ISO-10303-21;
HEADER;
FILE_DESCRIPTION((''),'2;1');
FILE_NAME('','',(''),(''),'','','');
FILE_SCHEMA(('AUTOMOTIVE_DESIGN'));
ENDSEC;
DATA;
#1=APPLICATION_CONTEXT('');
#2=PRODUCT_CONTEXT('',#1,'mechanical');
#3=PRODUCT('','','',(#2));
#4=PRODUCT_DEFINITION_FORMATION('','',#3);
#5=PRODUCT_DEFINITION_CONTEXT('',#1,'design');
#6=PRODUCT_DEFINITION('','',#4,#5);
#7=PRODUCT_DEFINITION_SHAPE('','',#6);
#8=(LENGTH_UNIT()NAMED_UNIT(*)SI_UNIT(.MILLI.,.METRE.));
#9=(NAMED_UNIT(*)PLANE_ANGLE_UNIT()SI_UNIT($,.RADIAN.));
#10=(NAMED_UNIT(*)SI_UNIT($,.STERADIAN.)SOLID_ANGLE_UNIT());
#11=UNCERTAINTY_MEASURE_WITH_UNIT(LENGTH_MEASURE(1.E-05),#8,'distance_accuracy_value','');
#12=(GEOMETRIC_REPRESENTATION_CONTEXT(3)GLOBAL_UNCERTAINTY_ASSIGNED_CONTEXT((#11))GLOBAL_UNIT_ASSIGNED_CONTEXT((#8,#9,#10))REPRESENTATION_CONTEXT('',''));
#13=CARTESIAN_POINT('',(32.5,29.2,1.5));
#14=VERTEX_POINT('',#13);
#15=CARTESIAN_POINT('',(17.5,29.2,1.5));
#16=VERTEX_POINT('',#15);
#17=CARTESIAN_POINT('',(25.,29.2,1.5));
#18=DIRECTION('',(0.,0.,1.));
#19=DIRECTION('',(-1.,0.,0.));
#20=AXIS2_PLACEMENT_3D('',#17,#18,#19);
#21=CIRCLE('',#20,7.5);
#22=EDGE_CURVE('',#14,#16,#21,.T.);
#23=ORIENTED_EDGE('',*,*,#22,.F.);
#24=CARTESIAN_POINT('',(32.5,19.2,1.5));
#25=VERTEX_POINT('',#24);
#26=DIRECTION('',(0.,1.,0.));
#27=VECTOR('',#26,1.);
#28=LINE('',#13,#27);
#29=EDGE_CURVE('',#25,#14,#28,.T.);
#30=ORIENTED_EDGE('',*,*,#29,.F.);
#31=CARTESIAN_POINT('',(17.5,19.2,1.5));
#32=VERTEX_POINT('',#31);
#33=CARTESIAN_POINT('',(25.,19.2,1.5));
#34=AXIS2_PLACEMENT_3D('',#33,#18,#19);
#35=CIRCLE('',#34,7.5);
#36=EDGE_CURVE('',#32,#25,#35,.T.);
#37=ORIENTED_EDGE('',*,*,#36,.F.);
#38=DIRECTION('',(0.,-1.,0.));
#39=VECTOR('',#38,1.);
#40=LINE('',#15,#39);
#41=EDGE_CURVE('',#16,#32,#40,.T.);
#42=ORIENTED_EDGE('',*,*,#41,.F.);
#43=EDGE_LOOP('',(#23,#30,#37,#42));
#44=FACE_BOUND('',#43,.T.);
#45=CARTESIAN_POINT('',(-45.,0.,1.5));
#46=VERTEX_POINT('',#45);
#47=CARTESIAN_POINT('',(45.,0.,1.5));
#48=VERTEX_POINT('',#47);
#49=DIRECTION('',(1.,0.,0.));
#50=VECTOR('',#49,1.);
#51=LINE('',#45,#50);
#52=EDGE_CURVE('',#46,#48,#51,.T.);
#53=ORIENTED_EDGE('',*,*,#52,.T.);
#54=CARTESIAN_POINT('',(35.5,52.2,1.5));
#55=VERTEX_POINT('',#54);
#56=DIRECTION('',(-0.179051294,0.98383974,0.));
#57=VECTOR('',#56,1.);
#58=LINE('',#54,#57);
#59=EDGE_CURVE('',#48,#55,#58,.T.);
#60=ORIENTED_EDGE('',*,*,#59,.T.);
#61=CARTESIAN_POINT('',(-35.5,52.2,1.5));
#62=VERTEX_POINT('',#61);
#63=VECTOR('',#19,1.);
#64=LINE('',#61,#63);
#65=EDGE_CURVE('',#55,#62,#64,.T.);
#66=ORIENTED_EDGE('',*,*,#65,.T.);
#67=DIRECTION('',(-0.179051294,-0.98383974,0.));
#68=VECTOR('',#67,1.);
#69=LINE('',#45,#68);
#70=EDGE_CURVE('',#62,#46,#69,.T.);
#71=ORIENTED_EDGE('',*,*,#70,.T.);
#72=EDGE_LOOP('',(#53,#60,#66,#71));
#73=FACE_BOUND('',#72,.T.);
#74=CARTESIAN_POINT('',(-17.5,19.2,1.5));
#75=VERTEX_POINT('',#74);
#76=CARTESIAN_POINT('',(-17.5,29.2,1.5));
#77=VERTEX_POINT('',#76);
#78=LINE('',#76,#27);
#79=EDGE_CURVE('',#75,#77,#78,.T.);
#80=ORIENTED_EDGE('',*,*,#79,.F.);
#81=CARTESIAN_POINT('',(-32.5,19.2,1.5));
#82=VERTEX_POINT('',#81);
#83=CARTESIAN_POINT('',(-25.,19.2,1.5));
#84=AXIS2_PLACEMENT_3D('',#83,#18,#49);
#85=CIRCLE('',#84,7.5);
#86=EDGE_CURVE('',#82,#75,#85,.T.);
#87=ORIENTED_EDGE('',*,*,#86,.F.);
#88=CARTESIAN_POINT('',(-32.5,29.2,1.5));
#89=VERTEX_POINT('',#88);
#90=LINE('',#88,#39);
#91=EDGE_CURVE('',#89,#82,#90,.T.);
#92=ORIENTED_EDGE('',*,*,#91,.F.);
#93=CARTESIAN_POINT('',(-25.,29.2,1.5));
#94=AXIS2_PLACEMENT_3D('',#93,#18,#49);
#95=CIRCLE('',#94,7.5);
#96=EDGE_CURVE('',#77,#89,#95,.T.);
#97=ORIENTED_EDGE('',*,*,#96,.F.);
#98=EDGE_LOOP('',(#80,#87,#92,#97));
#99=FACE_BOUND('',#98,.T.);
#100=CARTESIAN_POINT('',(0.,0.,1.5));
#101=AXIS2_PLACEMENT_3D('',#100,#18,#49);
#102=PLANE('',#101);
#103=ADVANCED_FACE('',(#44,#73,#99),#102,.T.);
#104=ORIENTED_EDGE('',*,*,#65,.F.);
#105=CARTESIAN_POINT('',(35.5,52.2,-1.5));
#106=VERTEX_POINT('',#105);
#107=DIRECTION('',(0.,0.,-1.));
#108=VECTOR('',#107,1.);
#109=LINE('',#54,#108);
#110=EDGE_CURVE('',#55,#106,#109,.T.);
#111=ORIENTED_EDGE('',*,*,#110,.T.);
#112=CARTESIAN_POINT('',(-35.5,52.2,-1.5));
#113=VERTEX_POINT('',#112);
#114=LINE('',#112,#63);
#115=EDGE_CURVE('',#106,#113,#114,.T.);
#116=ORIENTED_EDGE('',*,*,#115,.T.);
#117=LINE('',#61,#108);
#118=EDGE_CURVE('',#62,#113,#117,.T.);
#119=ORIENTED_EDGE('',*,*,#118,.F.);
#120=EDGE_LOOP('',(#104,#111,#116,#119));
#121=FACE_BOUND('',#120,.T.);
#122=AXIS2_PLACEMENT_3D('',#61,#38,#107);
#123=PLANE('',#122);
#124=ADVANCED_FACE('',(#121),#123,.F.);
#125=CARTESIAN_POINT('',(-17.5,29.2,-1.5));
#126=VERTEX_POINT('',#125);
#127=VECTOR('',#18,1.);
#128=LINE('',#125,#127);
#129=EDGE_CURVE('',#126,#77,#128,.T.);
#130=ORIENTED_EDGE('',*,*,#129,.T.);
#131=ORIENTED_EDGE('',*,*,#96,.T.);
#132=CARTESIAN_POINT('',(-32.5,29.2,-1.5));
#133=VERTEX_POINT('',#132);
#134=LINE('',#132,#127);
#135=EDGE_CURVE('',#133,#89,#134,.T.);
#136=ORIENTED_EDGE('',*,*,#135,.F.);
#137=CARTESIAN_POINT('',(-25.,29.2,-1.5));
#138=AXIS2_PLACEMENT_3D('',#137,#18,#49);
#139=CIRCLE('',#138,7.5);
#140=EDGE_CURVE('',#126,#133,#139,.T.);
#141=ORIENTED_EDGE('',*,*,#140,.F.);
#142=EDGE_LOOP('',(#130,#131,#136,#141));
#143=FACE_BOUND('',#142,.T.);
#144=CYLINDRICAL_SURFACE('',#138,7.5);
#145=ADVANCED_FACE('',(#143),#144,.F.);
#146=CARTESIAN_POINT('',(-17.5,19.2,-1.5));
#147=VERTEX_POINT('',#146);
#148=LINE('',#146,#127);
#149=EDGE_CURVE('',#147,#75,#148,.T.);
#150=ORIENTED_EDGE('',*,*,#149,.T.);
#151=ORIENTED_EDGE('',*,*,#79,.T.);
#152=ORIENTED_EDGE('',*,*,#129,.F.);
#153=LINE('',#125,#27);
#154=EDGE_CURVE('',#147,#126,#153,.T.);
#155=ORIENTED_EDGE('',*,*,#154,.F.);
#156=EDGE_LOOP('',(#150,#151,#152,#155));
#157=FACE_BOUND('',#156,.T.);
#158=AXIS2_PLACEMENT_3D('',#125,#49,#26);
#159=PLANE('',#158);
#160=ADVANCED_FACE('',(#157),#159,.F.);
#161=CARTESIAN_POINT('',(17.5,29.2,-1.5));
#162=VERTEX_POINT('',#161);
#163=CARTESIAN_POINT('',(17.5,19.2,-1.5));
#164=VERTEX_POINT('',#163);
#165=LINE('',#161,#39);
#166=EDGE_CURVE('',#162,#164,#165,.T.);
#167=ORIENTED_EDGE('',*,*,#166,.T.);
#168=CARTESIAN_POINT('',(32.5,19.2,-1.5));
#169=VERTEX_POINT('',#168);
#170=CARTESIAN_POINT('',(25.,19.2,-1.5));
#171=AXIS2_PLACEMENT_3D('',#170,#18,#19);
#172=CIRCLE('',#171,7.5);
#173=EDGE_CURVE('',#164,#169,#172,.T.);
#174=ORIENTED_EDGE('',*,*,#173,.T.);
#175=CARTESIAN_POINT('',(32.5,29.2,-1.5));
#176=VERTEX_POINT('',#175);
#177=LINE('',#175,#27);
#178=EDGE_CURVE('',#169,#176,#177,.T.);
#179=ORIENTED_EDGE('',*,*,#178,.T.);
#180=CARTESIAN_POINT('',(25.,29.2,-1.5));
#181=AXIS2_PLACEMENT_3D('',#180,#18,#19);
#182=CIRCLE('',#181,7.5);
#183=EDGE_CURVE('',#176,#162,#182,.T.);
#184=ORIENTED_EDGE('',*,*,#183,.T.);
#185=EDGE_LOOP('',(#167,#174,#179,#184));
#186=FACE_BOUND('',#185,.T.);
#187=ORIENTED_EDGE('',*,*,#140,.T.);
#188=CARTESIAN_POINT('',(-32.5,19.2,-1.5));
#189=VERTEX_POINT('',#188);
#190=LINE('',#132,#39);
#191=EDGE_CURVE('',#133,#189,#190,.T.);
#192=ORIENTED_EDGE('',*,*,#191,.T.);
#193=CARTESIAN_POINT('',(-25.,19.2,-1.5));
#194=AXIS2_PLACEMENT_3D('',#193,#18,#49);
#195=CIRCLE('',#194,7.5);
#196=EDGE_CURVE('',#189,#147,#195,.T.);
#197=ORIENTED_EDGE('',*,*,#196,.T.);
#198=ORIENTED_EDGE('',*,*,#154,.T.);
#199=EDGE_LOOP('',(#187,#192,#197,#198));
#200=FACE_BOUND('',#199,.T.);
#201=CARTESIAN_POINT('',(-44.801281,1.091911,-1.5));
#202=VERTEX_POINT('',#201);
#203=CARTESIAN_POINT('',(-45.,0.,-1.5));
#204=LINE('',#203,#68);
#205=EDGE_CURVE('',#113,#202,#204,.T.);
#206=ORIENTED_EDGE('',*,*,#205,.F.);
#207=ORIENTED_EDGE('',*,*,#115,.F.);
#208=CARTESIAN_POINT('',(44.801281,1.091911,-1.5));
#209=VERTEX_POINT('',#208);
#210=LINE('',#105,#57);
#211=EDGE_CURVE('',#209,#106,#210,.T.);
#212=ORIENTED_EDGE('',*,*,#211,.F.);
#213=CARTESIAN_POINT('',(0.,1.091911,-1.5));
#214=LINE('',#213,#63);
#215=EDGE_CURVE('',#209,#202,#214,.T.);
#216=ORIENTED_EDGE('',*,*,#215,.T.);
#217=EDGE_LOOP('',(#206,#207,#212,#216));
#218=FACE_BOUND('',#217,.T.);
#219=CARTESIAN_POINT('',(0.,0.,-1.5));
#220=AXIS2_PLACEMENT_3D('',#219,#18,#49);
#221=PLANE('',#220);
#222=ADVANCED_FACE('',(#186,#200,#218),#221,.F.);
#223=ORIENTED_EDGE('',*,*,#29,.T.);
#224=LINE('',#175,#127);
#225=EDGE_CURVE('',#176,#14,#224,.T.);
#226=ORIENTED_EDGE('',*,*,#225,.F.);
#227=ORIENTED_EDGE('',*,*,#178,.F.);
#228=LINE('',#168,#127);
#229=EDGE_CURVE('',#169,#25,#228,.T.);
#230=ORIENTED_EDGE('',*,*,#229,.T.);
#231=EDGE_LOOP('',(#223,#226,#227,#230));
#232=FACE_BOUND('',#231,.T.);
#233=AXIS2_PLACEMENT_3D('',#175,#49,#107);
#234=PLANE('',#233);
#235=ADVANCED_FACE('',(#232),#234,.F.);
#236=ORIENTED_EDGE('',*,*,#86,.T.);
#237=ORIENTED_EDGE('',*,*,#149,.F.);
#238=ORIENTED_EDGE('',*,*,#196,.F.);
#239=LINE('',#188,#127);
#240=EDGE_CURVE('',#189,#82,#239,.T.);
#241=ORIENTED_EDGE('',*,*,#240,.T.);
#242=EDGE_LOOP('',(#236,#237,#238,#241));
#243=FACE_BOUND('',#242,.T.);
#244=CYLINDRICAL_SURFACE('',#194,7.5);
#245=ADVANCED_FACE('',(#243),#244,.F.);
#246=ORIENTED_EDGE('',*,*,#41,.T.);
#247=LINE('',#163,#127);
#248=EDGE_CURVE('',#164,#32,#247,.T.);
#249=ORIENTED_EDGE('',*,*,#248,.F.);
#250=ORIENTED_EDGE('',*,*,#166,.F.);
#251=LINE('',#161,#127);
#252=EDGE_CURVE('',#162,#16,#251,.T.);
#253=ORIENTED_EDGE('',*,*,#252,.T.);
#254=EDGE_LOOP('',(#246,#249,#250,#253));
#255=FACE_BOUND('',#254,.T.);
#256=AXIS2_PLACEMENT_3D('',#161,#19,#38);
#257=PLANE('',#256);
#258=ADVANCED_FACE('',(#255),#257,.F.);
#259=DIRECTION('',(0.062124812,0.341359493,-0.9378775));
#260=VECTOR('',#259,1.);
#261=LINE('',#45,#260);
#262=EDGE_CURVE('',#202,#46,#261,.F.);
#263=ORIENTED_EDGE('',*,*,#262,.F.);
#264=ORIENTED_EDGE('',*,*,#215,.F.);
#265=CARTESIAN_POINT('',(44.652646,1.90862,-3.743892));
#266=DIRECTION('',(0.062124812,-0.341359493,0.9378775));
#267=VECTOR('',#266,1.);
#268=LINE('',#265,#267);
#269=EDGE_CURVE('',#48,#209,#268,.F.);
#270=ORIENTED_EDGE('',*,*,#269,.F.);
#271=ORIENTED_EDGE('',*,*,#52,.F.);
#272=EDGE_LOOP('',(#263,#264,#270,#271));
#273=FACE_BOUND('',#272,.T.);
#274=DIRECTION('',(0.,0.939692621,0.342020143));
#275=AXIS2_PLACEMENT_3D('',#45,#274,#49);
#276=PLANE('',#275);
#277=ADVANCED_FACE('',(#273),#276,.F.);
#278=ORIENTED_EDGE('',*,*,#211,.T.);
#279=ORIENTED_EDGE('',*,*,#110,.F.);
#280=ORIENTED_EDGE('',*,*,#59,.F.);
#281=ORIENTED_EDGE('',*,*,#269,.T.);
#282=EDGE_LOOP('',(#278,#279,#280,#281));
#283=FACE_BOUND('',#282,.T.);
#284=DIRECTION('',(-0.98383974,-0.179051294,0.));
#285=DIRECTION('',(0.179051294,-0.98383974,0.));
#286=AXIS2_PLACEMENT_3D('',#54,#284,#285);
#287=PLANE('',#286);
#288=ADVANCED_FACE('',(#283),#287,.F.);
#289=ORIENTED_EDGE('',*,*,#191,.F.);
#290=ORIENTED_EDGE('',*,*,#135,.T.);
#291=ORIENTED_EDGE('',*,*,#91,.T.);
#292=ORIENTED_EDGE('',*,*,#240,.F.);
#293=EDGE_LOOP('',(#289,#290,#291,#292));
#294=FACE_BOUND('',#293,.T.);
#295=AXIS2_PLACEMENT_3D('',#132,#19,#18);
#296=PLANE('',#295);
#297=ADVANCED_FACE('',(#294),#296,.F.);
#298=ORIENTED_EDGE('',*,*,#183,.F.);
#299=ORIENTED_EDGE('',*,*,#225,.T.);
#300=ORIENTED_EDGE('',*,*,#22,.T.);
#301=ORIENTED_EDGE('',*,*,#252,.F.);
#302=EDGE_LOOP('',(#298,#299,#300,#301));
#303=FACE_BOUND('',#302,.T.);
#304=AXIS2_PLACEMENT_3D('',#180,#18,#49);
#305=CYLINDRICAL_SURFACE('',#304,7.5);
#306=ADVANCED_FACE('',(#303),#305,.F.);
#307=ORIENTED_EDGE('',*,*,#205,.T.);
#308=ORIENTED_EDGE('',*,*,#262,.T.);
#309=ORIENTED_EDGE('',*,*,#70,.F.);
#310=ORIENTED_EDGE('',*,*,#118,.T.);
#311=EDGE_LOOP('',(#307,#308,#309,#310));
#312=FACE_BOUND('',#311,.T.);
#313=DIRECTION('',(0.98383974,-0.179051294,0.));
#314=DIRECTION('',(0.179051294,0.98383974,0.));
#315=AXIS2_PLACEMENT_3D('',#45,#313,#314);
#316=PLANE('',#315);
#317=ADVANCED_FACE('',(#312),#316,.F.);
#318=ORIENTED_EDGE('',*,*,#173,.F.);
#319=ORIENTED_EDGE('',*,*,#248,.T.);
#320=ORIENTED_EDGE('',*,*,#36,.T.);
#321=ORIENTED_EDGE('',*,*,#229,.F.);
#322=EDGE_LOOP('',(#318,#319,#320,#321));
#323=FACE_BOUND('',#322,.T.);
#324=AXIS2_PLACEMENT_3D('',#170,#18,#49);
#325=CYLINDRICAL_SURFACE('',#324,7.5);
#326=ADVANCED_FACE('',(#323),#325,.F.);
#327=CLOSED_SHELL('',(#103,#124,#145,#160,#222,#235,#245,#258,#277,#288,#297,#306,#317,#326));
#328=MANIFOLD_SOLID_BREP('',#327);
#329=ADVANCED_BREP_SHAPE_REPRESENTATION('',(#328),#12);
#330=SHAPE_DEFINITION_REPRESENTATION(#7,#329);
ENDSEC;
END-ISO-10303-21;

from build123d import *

# Parameters (mm, degrees)
BOSS_EXTRUDE1_DEPTH = 1.5
CUT_EXTRUDE1_DEPTH  = 69.98434605
CHAMFER1_SIZE2      = 1.091910703
CHAMFER1_SIZE       = 3


with BuildPart() as part:
    # Sketch1 → Boss-Extrude1 (new, symmetric)
    with BuildSketch(Plane.XY):
        Polygon((-45, 0), (45, 0), (35.5, 52.2), (-35.5, 52.2), align=None)
    extrude(amount=BOSS_EXTRUDE1_DEPTH, both=True)

    # Sketch2 → Cut-Extrude1 (cut, through all)
    with BuildSketch(Plane.XY.offset(1.5)):
        with BuildLine():
            Line((-17.5, 29.2), (-17.5, 19.2))
            ThreePointArc((-17.5, 19.2), (-25, 11.7), (-32.5, 19.2))
            Line((-32.5, 19.2), (-32.5, 29.2))
            ThreePointArc((-32.5, 29.2), (-25, 36.7), (-17.5, 29.2))
        make_face()
        with BuildLine():
            Line((17.5, 29.2), (17.5, 19.2))
            ThreePointArc((17.5, 19.2), (25, 11.7), (32.5, 19.2))
            Line((32.5, 19.2), (32.5, 29.2))
            ThreePointArc((32.5, 29.2), (25, 36.7), (17.5, 29.2))
        make_face()
    extrude(amount=-CUT_EXTRUDE1_DEPTH, mode=Mode.SUBTRACT)

    # Chamfer1
    chamfer1_edges = [part.edges().sort_by_distance(p)[0] for p in [
        (0, 0, -1.5),
    ]]
    chamfer1_side = [part.faces().sort_by_distance(p)[0] for p in [
        (0, 0, -1.478161786),
    ]]
    chamfer(chamfer1_edges, length=CHAMFER1_SIZE - 0.0001, length2=CHAMFER1_SIZE2 - 0.0001, reference=chamfer1_side[0])  # a hair under: the kernel refuses the full size


solid = part.part
